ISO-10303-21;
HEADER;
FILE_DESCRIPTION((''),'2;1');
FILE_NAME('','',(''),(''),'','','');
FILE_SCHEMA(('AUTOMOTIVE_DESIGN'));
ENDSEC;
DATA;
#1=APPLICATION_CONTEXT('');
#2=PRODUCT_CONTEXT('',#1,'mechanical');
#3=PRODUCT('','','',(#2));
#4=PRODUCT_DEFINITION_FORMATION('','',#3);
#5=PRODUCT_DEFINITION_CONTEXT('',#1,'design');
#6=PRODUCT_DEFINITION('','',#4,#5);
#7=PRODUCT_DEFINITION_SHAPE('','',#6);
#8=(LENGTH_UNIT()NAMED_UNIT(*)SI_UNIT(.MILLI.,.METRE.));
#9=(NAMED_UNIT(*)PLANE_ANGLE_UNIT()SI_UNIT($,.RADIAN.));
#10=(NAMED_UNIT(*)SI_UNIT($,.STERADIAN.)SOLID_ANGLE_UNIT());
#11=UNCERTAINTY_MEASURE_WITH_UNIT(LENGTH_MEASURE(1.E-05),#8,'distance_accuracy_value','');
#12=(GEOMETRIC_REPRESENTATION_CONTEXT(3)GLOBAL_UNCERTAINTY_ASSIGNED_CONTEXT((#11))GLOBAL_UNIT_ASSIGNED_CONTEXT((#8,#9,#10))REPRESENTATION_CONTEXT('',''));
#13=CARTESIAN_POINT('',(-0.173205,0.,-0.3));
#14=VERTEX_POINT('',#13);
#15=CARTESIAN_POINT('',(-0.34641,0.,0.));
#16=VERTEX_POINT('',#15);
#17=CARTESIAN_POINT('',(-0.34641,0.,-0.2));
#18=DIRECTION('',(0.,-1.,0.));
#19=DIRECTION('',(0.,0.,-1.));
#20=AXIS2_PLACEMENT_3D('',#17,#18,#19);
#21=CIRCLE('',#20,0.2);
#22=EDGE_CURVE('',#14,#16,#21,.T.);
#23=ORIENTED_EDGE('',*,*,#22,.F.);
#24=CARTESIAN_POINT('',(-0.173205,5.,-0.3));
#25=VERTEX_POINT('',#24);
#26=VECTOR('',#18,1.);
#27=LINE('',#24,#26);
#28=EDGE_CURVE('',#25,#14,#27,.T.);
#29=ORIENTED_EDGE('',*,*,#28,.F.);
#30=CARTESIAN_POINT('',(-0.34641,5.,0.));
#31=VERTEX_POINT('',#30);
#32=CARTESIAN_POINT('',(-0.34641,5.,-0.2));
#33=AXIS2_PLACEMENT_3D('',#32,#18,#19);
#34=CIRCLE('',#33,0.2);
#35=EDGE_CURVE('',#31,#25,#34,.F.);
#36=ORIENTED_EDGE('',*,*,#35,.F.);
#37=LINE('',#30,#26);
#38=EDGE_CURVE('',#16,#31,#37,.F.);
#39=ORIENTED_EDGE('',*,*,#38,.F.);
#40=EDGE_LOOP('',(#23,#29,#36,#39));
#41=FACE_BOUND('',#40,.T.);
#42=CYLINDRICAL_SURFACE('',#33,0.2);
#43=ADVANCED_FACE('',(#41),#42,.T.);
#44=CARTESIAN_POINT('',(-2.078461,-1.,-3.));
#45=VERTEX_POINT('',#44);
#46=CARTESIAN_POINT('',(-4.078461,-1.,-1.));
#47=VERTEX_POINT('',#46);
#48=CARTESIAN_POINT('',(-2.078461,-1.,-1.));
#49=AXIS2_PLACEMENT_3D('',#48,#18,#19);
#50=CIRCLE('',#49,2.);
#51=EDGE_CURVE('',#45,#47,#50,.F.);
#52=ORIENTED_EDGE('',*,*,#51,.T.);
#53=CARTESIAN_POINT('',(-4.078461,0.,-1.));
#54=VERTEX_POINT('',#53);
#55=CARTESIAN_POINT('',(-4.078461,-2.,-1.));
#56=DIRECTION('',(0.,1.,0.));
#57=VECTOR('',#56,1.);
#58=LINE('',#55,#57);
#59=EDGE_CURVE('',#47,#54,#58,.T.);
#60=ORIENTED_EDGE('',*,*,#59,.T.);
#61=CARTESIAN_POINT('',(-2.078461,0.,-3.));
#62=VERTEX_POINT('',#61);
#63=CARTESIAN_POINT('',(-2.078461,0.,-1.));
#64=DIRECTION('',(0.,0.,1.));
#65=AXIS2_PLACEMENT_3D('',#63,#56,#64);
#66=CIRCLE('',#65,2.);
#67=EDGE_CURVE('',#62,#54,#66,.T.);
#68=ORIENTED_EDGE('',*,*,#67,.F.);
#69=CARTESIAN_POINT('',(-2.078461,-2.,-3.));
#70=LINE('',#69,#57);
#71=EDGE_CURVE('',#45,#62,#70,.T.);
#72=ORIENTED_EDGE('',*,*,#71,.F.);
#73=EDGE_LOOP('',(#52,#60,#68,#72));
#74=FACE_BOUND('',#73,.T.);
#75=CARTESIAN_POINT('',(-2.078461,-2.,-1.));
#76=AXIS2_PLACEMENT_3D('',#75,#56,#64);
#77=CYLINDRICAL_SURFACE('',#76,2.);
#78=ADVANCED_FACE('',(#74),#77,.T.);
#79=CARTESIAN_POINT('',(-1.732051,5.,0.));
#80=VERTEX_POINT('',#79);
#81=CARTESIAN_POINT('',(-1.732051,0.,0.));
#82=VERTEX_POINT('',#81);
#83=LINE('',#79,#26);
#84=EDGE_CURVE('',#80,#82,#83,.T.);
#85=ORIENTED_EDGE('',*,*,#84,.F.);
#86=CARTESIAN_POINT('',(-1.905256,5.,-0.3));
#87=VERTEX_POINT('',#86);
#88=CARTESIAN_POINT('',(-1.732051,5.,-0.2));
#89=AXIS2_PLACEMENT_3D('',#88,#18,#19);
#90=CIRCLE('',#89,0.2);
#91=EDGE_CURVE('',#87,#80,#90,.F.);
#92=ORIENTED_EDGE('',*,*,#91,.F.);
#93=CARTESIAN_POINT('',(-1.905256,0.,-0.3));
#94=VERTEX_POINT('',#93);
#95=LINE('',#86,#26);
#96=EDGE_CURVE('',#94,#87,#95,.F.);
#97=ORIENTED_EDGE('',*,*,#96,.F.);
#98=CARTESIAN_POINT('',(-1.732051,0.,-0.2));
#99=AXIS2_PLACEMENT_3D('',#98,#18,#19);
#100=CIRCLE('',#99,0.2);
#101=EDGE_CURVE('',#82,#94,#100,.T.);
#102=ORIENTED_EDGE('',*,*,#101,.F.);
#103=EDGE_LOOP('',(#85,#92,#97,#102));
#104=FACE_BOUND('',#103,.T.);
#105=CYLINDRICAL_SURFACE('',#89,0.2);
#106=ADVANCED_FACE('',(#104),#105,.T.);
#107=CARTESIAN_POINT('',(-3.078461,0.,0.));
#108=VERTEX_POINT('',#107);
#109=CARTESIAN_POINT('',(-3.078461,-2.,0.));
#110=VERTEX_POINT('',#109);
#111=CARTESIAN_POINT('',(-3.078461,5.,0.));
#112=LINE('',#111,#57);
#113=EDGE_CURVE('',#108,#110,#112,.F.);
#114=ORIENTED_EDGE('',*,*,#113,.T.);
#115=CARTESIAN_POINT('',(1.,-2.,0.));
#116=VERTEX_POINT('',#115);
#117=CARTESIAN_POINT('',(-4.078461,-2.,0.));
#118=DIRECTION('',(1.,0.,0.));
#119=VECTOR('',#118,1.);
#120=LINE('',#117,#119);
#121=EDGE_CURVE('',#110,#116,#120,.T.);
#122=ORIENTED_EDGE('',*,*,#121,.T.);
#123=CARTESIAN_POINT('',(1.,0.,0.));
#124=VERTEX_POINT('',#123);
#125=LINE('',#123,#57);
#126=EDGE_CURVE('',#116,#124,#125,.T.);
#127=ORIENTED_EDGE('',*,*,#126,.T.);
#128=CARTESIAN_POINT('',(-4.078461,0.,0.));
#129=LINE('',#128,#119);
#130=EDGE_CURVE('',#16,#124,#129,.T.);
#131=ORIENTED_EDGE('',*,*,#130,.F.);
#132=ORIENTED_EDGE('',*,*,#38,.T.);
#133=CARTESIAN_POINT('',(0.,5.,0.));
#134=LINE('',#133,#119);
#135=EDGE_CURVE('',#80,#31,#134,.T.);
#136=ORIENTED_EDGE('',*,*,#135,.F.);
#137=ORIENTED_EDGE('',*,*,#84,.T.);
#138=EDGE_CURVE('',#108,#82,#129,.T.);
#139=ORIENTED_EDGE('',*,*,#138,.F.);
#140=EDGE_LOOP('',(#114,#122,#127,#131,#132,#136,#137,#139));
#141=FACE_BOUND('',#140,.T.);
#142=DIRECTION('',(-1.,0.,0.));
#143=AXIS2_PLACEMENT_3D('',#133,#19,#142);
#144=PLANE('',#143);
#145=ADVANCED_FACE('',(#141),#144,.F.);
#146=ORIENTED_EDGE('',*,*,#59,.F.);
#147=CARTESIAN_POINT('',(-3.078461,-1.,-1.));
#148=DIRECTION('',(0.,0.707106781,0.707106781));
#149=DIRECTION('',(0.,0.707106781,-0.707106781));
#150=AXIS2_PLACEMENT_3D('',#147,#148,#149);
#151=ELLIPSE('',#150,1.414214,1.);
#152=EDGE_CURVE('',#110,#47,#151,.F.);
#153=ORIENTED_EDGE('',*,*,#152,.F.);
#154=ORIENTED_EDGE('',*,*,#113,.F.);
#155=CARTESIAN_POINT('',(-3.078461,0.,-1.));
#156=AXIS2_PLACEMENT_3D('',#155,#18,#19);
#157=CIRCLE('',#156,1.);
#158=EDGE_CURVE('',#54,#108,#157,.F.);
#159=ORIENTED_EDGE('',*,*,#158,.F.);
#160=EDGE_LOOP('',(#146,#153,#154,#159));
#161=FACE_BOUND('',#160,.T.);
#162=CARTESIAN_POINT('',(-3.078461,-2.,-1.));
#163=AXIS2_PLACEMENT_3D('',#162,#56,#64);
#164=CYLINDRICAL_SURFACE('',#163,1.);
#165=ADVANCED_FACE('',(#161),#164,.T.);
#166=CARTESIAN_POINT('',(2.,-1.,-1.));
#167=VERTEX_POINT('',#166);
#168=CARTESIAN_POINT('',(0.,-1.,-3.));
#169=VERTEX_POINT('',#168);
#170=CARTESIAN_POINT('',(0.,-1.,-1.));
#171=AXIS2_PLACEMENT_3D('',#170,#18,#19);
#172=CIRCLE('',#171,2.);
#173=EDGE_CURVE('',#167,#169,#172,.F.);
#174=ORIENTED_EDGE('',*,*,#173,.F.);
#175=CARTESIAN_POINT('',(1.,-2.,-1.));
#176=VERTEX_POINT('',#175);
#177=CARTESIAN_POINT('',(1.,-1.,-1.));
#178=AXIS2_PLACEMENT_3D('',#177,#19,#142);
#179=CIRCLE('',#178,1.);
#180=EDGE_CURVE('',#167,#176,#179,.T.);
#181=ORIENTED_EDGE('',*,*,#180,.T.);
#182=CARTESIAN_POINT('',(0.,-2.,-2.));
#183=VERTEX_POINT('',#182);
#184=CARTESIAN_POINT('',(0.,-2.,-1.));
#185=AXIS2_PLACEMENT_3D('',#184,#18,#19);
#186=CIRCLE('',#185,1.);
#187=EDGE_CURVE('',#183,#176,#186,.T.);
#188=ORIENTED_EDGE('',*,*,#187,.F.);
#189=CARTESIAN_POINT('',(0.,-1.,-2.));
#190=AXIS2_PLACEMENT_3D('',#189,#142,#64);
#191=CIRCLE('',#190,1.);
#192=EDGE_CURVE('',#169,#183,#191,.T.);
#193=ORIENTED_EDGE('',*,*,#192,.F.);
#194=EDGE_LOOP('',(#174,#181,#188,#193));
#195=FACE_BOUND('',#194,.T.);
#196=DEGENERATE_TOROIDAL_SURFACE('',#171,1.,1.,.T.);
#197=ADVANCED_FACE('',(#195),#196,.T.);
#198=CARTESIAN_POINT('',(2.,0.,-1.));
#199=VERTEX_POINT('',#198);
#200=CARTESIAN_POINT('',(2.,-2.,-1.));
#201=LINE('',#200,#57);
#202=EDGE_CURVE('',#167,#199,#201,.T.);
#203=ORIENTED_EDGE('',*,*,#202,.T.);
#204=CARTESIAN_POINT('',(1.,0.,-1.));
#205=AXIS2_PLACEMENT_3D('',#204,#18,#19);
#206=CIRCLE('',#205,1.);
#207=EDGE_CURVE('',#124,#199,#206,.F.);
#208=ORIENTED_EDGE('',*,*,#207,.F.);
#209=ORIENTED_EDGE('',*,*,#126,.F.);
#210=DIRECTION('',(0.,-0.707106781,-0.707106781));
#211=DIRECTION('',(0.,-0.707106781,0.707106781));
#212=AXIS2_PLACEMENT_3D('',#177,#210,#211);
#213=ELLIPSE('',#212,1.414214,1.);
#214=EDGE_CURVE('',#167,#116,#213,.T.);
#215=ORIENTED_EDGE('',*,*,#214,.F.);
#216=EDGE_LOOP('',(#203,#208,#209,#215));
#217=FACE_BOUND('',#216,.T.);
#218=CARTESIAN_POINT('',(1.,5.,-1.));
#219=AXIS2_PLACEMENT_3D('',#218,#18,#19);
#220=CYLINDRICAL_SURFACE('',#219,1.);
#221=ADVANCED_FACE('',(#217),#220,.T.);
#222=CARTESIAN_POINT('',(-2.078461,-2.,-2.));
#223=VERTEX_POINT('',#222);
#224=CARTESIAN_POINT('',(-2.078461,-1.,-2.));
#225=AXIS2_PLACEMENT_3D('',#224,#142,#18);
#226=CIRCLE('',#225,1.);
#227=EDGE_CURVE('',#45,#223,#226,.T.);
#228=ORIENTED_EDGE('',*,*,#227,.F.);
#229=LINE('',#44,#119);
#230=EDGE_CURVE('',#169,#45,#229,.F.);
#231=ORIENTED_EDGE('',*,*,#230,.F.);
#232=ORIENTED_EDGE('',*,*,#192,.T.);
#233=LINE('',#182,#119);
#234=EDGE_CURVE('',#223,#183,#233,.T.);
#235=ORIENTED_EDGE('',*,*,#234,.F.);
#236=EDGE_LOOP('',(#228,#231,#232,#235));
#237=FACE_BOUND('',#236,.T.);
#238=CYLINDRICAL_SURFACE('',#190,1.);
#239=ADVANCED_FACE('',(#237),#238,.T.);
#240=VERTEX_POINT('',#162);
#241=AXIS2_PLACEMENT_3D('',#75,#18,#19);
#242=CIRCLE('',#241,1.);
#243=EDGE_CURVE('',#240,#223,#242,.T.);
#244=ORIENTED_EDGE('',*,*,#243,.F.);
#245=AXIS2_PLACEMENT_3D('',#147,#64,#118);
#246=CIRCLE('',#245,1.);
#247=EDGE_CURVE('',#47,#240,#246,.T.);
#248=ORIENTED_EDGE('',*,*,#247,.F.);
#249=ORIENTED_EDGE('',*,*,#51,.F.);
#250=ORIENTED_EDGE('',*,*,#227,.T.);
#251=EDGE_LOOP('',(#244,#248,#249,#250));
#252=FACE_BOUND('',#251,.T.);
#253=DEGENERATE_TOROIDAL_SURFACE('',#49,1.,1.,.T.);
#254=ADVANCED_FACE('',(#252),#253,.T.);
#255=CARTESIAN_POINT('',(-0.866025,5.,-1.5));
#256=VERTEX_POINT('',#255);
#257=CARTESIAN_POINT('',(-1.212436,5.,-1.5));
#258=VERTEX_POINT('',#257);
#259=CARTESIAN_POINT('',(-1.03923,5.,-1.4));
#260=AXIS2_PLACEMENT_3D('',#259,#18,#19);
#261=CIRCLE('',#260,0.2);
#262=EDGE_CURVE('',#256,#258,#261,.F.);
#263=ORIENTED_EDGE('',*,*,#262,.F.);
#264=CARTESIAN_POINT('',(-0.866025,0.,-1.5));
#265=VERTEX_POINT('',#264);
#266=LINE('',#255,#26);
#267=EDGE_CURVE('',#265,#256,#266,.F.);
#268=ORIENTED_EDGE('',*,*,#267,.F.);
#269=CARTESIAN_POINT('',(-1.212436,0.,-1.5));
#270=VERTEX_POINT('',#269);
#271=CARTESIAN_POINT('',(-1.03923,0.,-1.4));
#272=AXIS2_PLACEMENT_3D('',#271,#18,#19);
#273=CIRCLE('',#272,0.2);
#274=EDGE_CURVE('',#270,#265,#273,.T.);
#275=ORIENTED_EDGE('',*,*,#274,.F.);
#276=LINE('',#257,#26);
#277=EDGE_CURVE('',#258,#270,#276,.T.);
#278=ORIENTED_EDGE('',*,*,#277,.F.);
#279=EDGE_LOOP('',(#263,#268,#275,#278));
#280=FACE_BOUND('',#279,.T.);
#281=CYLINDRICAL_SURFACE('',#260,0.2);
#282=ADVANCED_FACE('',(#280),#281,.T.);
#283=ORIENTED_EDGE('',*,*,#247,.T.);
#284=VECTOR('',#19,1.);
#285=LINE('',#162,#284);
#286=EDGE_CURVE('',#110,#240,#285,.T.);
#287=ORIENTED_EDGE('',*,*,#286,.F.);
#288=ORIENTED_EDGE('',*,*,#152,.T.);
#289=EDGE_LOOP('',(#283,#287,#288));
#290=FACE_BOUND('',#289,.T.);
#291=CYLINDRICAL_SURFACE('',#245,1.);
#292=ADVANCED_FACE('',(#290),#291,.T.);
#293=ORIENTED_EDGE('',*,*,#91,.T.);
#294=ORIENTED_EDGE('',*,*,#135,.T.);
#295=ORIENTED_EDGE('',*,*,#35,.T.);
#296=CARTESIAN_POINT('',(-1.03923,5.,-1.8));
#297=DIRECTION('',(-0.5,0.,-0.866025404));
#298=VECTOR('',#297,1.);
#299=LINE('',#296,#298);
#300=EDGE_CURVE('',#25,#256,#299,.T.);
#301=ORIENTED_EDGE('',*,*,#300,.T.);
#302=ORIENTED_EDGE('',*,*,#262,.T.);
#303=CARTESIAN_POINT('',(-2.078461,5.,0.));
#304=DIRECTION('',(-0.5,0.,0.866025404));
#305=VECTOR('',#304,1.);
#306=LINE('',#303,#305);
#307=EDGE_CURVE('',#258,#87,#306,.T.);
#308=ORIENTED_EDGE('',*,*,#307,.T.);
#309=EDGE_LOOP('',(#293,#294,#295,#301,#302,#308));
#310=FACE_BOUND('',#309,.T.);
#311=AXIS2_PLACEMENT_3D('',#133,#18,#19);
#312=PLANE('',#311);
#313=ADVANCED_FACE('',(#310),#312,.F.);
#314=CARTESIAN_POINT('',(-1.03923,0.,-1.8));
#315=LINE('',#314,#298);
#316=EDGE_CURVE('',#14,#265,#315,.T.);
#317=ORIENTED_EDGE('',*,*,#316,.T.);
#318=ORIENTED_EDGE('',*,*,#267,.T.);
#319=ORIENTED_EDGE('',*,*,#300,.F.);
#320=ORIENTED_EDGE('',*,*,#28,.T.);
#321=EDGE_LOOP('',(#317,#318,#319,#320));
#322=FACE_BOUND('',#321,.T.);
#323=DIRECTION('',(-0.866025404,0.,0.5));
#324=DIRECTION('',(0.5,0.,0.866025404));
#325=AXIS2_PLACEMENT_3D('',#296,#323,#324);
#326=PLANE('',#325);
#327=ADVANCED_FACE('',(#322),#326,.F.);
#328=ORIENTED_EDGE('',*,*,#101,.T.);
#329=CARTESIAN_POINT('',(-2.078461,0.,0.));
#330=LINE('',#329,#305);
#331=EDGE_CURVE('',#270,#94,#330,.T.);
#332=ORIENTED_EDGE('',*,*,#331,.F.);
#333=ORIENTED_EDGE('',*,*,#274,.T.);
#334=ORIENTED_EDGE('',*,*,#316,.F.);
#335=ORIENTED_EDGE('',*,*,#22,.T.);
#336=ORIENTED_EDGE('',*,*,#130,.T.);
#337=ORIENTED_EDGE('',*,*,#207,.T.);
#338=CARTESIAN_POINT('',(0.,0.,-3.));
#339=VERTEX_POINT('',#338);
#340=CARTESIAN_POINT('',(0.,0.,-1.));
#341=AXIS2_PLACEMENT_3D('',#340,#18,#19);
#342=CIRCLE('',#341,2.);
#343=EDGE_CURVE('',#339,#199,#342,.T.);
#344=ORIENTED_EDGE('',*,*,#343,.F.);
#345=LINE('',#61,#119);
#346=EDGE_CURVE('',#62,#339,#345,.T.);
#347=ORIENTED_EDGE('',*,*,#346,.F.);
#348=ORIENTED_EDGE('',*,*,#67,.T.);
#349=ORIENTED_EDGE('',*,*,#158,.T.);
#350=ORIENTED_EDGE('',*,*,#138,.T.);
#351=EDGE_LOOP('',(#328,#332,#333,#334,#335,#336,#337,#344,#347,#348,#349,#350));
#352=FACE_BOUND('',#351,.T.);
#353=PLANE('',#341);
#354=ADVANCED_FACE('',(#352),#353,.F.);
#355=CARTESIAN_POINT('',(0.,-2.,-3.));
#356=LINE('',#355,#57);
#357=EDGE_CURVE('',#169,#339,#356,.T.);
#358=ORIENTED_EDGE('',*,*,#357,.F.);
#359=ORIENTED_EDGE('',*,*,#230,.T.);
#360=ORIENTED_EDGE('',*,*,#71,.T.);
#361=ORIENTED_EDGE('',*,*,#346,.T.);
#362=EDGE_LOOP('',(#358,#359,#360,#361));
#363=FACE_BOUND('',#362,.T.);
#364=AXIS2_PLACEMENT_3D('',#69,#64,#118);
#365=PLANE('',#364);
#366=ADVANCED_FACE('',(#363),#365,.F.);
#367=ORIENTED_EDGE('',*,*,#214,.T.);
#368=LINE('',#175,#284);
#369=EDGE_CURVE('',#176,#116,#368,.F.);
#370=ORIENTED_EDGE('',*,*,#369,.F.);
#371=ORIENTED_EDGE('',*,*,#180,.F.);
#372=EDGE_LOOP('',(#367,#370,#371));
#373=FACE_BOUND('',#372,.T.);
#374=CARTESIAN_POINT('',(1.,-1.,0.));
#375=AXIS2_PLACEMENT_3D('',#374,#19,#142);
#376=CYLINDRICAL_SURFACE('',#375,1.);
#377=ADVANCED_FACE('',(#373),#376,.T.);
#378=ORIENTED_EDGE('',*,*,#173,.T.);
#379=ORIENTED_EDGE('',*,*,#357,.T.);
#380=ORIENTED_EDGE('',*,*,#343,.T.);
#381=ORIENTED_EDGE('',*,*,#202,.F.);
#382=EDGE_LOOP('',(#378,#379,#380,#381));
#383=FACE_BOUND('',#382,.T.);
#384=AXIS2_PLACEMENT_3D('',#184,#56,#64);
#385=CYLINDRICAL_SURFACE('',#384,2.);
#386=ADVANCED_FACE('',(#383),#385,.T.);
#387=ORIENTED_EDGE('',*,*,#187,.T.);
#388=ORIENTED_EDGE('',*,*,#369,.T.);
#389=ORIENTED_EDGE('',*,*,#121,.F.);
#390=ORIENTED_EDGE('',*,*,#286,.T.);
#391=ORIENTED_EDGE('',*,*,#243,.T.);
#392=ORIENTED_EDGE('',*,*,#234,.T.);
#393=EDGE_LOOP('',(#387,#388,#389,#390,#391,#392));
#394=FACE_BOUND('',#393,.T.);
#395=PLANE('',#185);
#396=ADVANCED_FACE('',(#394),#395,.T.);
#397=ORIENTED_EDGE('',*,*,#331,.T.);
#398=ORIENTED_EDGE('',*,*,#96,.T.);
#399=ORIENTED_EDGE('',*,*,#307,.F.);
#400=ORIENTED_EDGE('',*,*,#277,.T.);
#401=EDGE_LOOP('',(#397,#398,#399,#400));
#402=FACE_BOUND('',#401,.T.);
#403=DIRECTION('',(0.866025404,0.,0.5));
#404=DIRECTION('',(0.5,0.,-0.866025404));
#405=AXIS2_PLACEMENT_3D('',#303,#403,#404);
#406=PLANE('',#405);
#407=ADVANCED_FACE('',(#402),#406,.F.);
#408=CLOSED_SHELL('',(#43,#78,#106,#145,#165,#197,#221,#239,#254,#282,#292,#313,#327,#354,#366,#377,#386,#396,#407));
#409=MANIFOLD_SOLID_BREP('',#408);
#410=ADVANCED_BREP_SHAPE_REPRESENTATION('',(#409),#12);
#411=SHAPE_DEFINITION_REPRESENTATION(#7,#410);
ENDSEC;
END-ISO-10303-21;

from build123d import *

# Parameters (mm, degrees)
BOSS_EXTRUDE1_DEPTH = 5
BOSS_EXTRUDE2_DEPTH = 2
FILLET1_R           = 1
FILLET2_R           = 0.2


with BuildPart() as part:
    # Sketch2 → Boss-Extrude1 (new body)
    with BuildSketch(Plane(origin=(0, 0, 0), x_dir=(1, 0, 0), z_dir=(0, 1, 0))):
        Polygon((0, 0), (-2.078460969, 0), (-1.039230485, 1.8), align=None)
    extrude(amount=BOSS_EXTRUDE1_DEPTH)

    # Sketch3 → Boss-Extrude2 (add)
    with BuildSketch(Plane.XZ):
        with BuildLine():
            Line((-4.078460969, 0), (2, 0))
            Line((2, 0), (2, -1))
            ThreePointArc((2, -1), (1.414213562, -2.414213562), (0, -3))
            Line((0, -3), (-2.078460969, -3))
            ThreePointArc((-2.078460969, -3), (-3.492674531, -2.414213562), (-4.078460969, -1))
            Line((-4.078460969, -1), (-4.078460969, 0))
        make_face()
    extrude(amount=BOSS_EXTRUDE2_DEPTH)

    # Fillet1
    fillet1_edges = [part.edges().sort_by_distance(p)[0] for p in [
        (-4.078460969, -2, -0.5),
        (-3.492674531, -2, -2.414213562),
        (-1.039230485, -2, -3),
        (2, -2, -0.5),
        (1.414213562, -2, -2.414213562),
        (-4.078460969, -1, 0),
        (2, -1, 0),
    ]]
    fillet(fillet1_edges, radius=FILLET1_R - 0.0001)  # a hair under: the kernel refuses the full size

    # Fillet2
    fillet2_edges = [part.edges().sort_by_distance(p)[0] for p in [
        (0, 2.5, 0),
        (-2.078460969, 2.5, 0),
        (-1.039230485, 2.5, -1.8),
    ]]
    fillet(fillet2_edges, radius=FILLET2_R)


solid = part.part
